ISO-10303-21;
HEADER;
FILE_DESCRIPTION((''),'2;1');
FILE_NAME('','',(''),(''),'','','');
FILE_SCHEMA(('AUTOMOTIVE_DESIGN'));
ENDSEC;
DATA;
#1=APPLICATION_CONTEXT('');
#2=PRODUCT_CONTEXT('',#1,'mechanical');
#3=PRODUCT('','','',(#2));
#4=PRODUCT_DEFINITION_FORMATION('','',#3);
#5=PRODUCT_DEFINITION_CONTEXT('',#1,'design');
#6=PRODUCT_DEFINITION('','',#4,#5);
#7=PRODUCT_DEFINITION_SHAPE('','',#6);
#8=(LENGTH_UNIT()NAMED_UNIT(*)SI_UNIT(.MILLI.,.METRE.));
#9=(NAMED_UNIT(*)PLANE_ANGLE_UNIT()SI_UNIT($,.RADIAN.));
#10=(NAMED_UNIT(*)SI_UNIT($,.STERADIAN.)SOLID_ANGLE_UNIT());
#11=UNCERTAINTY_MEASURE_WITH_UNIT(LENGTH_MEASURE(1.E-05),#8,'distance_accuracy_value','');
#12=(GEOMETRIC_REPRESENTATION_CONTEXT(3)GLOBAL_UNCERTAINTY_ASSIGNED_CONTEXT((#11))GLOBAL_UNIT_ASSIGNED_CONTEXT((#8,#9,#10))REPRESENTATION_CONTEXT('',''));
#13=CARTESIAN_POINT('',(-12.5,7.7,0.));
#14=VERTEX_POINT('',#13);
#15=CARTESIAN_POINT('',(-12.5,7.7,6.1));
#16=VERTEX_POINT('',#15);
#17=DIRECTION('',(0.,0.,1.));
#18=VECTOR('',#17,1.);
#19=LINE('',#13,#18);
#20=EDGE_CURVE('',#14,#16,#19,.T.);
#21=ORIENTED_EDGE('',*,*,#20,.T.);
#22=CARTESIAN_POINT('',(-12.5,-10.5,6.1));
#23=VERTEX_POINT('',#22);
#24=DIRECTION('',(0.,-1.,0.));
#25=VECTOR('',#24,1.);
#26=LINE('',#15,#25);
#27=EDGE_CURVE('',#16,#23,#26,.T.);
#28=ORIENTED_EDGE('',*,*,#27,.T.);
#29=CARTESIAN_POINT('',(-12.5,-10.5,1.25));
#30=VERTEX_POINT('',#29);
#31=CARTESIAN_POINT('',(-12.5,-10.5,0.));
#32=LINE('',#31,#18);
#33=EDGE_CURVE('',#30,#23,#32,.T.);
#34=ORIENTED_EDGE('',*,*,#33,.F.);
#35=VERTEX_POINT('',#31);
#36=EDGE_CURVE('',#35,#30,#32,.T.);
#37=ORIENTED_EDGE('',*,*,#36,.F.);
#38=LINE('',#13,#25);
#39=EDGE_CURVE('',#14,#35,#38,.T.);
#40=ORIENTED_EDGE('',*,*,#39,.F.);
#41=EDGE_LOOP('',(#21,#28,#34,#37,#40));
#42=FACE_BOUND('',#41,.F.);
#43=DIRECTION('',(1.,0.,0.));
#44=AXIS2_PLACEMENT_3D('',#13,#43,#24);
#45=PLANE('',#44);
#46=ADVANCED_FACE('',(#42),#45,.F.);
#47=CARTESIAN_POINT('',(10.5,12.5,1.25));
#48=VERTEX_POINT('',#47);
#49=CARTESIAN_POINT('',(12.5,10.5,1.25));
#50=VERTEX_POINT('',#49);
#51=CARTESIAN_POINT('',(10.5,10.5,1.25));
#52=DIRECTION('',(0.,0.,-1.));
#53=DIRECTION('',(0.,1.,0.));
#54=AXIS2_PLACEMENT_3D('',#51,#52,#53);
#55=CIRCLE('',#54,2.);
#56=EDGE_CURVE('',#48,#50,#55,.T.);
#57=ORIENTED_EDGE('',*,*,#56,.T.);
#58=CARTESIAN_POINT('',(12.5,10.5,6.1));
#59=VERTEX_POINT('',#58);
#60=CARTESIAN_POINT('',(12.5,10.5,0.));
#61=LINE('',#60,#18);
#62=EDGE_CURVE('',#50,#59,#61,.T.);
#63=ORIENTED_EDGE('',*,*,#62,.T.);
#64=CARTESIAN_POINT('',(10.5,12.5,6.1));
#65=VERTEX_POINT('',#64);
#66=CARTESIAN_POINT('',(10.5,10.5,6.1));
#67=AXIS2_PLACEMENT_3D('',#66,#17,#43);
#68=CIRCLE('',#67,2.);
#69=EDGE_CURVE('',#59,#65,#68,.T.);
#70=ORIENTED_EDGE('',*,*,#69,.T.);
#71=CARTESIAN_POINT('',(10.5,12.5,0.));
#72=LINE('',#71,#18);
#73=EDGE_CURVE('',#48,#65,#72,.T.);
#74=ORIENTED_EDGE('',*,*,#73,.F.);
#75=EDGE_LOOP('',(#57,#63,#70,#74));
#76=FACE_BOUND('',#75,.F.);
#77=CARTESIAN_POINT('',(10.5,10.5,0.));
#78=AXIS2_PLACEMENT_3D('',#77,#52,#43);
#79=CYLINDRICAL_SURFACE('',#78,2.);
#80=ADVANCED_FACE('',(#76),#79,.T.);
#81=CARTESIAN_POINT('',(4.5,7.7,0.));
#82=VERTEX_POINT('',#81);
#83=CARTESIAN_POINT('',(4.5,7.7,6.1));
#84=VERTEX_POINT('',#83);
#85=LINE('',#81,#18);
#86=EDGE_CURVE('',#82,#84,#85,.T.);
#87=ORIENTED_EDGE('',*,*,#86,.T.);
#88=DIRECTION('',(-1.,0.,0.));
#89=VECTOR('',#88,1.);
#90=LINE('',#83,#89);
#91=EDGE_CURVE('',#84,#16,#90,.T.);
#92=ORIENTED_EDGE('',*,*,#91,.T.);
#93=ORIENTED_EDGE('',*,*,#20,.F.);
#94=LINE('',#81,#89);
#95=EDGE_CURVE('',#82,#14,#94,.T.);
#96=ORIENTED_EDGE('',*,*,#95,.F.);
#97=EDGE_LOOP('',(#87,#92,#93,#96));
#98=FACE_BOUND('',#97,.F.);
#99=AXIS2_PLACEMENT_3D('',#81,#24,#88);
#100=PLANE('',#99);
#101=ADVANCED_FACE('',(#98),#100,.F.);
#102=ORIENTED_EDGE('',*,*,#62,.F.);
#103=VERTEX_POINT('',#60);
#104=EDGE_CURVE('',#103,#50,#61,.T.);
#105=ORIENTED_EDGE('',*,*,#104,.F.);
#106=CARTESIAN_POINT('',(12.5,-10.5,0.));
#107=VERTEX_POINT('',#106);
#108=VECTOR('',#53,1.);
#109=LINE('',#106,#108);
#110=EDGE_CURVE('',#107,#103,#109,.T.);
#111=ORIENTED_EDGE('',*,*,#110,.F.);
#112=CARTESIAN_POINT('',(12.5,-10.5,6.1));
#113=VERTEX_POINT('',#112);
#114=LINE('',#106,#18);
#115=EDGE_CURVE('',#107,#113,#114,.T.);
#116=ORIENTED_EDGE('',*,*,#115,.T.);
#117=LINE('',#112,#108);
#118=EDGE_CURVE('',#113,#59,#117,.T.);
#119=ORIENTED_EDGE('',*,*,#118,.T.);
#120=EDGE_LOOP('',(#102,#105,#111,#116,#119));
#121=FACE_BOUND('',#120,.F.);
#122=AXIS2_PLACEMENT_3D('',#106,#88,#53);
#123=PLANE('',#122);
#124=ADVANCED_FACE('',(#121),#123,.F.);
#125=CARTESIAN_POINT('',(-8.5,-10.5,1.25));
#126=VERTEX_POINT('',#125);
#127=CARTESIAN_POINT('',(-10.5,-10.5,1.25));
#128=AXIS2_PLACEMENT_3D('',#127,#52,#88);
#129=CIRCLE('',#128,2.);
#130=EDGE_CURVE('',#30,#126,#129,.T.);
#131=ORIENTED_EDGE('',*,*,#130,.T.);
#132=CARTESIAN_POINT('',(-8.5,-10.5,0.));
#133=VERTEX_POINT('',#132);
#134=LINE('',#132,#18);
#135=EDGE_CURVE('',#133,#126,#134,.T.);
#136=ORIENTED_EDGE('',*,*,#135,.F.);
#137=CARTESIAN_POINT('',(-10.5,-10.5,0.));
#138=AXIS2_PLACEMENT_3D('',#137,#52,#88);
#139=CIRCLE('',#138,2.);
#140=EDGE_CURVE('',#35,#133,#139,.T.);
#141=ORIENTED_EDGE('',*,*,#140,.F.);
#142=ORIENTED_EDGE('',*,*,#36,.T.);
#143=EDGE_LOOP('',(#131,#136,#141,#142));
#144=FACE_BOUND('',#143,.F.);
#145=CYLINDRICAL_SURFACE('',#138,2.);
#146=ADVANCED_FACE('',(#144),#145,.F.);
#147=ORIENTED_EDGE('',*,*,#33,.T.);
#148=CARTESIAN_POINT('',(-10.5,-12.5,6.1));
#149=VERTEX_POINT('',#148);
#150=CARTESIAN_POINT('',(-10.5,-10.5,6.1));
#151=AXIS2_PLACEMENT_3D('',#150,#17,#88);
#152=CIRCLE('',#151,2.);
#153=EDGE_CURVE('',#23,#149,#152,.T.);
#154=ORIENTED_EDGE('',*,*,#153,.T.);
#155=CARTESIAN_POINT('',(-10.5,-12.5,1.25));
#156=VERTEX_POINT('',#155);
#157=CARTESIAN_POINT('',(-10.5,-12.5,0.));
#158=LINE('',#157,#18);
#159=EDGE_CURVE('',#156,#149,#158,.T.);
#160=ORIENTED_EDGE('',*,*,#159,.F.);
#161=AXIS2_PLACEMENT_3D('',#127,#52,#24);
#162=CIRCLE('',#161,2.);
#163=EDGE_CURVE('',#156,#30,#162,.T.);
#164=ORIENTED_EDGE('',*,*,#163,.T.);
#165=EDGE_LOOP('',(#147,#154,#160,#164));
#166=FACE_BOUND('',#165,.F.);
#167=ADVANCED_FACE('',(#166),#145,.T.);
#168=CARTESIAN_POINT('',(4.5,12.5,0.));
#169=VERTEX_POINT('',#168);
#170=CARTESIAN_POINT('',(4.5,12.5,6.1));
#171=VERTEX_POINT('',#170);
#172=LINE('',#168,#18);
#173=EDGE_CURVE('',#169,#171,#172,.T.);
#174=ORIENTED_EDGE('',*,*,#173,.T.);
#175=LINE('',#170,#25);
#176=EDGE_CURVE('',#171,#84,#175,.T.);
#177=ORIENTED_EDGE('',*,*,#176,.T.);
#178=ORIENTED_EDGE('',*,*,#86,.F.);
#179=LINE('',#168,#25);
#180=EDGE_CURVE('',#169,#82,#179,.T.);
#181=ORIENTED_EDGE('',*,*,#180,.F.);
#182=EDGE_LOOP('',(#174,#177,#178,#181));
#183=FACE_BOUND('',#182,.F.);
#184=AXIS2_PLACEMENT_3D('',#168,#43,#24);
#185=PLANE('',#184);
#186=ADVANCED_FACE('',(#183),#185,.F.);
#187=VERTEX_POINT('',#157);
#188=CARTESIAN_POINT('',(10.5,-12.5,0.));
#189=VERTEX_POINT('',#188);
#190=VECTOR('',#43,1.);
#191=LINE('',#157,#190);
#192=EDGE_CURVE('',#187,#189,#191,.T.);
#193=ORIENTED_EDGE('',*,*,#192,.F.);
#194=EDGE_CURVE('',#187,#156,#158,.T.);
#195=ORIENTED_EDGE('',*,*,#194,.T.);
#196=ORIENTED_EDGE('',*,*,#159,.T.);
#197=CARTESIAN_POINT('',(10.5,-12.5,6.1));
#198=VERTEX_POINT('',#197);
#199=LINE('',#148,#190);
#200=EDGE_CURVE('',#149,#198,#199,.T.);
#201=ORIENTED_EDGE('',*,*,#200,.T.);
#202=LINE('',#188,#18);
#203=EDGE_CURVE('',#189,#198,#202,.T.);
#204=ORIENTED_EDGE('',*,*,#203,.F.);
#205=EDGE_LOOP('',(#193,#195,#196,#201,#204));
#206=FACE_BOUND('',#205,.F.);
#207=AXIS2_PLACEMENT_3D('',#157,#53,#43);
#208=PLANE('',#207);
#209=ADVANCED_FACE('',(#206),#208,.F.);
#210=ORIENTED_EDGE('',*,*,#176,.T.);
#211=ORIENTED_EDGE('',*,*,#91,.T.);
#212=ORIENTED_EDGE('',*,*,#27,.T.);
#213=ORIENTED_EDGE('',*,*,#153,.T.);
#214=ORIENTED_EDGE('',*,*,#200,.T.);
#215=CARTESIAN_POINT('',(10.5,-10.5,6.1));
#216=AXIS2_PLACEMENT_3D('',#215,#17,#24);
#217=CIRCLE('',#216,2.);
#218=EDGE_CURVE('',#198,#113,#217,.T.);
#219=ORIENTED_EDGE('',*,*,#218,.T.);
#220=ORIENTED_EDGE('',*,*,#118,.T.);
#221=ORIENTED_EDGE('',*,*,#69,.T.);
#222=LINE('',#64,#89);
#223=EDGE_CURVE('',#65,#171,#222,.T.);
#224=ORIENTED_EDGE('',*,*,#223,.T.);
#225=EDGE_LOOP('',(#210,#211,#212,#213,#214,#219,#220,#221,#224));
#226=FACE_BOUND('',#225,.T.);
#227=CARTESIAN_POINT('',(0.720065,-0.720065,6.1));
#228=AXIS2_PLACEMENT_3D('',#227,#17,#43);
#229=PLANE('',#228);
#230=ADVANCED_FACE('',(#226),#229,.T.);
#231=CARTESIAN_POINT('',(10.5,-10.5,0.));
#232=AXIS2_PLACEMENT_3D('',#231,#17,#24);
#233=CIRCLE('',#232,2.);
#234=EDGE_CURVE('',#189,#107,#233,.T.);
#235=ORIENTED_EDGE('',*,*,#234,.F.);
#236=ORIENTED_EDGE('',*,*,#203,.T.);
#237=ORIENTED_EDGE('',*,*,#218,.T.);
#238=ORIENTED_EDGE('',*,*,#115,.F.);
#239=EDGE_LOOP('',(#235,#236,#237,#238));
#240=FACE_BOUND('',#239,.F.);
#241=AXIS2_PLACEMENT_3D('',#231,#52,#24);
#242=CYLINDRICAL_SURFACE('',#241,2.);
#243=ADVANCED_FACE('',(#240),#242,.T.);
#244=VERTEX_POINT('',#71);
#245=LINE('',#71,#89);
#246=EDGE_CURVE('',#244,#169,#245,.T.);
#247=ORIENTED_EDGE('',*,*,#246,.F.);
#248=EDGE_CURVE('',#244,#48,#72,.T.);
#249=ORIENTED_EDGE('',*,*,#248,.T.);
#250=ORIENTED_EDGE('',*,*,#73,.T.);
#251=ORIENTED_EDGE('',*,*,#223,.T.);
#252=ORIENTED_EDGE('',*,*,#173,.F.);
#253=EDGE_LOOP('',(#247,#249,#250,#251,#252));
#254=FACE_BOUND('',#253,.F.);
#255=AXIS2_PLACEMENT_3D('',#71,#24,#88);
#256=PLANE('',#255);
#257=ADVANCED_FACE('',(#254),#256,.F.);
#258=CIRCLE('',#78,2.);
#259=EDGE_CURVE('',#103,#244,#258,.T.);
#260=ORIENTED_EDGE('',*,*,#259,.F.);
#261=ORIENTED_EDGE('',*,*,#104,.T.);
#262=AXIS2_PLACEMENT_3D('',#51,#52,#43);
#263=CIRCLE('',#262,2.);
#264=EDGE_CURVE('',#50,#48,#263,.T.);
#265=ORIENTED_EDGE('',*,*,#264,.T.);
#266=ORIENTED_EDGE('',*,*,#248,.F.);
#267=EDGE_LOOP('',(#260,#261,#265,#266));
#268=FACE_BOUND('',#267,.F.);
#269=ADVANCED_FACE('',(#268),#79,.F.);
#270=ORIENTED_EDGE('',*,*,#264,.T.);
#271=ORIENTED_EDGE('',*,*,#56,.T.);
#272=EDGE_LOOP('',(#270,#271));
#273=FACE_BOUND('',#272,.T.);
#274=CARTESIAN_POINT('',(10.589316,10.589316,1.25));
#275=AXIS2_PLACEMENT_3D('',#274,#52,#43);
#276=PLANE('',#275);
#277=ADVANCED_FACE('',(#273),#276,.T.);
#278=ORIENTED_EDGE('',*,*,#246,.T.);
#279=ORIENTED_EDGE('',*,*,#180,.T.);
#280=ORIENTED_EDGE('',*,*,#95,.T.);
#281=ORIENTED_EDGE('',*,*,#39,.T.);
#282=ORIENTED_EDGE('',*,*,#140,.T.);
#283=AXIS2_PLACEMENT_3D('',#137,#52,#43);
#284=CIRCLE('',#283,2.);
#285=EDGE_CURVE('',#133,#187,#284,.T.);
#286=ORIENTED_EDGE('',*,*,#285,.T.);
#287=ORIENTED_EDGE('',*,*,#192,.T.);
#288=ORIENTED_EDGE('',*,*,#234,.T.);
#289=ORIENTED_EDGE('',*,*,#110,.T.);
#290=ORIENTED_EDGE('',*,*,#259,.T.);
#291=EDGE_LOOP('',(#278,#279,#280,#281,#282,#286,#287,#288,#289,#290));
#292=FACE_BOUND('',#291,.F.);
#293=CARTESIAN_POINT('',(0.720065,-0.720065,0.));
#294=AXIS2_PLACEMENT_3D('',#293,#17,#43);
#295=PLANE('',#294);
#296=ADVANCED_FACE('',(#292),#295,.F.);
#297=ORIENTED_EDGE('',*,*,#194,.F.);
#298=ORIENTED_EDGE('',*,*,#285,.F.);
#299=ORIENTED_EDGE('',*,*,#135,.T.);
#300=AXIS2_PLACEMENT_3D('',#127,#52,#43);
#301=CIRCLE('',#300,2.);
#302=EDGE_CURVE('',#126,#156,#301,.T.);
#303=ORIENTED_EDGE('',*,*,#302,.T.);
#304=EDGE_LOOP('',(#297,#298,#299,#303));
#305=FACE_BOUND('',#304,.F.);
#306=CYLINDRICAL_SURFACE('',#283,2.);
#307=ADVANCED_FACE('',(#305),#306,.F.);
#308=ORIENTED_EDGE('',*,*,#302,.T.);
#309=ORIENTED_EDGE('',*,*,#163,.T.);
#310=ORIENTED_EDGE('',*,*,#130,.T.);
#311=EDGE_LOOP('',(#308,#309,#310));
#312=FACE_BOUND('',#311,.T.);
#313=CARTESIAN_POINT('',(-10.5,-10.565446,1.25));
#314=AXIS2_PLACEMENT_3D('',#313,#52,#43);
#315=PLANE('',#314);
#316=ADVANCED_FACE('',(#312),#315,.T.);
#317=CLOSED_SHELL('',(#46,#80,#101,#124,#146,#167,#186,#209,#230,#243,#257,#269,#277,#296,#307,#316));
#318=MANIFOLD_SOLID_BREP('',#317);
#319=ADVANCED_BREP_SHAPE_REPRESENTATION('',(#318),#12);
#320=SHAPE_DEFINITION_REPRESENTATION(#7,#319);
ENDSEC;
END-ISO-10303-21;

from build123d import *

# Parameters (mm, degrees)
F1_DEPTH = 6.1
F3_DEPTH = 1.25


# Not quite as in the source:
# - a feature names something its author has since deleted; it is built from what else it names


with BuildPart() as f1:
    # F0 (on Top) → F1 (new body)
    with BuildSketch(Plane.XY):
        with BuildLine():
            ThreePointArc((12.5, 10.5), (11.9142135624, 11.9142135624), (10.5, 12.5))
            Line((10.5, 12.5), (4.5, 12.5))
            Line((4.5, 12.5), (4.5, 7.7))
            Line((4.5, 7.7), (-12.5, 7.7))
            Line((-12.5, 7.7), (-12.5, -10.5))
            ThreePointArc((-12.5, -10.5), (-11.9142135624, -11.9142135624), (-10.5, -12.5))
            Line((-10.5, -12.5), (10.5, -12.5))
            ThreePointArc((10.5, -12.5), (11.9142135624, -11.9142135624), (12.5, -10.5))
            Line((12.5, -10.5), (12.5, 10.5))
        make_face()
    extrude(amount=F1_DEPTH)

    # F2 (on face) → F3 (cut)
    with BuildSketch(Plane(origin=(0, 0, 0), x_dir=(1, 0, 0), z_dir=(0, 0, -1))):
        with BuildLine():
            ThreePointArc((10.5, -12.5), (11.9142135624, -11.9142135624), (12.5, -10.5))
            ThreePointArc((12.5, -10.5), (9.0857864376, -9.0857864376), (10.5, -12.5))
        make_face()
        with BuildLine():
            ThreePointArc((-8.5, 10.5), (-9.0857864376, 11.9142135624), (-10.5, 12.5))
            ThreePointArc((-10.5, 12.5), (-11.9142135624, 11.9142135624), (-12.5, 10.5))
            ThreePointArc((-12.5, 10.5), (-10.5, 8.5), (-8.5, 10.5))
        make_face()
    extrude(amount=-F3_DEPTH, mode=Mode.SUBTRACT)


solid = f1.part
